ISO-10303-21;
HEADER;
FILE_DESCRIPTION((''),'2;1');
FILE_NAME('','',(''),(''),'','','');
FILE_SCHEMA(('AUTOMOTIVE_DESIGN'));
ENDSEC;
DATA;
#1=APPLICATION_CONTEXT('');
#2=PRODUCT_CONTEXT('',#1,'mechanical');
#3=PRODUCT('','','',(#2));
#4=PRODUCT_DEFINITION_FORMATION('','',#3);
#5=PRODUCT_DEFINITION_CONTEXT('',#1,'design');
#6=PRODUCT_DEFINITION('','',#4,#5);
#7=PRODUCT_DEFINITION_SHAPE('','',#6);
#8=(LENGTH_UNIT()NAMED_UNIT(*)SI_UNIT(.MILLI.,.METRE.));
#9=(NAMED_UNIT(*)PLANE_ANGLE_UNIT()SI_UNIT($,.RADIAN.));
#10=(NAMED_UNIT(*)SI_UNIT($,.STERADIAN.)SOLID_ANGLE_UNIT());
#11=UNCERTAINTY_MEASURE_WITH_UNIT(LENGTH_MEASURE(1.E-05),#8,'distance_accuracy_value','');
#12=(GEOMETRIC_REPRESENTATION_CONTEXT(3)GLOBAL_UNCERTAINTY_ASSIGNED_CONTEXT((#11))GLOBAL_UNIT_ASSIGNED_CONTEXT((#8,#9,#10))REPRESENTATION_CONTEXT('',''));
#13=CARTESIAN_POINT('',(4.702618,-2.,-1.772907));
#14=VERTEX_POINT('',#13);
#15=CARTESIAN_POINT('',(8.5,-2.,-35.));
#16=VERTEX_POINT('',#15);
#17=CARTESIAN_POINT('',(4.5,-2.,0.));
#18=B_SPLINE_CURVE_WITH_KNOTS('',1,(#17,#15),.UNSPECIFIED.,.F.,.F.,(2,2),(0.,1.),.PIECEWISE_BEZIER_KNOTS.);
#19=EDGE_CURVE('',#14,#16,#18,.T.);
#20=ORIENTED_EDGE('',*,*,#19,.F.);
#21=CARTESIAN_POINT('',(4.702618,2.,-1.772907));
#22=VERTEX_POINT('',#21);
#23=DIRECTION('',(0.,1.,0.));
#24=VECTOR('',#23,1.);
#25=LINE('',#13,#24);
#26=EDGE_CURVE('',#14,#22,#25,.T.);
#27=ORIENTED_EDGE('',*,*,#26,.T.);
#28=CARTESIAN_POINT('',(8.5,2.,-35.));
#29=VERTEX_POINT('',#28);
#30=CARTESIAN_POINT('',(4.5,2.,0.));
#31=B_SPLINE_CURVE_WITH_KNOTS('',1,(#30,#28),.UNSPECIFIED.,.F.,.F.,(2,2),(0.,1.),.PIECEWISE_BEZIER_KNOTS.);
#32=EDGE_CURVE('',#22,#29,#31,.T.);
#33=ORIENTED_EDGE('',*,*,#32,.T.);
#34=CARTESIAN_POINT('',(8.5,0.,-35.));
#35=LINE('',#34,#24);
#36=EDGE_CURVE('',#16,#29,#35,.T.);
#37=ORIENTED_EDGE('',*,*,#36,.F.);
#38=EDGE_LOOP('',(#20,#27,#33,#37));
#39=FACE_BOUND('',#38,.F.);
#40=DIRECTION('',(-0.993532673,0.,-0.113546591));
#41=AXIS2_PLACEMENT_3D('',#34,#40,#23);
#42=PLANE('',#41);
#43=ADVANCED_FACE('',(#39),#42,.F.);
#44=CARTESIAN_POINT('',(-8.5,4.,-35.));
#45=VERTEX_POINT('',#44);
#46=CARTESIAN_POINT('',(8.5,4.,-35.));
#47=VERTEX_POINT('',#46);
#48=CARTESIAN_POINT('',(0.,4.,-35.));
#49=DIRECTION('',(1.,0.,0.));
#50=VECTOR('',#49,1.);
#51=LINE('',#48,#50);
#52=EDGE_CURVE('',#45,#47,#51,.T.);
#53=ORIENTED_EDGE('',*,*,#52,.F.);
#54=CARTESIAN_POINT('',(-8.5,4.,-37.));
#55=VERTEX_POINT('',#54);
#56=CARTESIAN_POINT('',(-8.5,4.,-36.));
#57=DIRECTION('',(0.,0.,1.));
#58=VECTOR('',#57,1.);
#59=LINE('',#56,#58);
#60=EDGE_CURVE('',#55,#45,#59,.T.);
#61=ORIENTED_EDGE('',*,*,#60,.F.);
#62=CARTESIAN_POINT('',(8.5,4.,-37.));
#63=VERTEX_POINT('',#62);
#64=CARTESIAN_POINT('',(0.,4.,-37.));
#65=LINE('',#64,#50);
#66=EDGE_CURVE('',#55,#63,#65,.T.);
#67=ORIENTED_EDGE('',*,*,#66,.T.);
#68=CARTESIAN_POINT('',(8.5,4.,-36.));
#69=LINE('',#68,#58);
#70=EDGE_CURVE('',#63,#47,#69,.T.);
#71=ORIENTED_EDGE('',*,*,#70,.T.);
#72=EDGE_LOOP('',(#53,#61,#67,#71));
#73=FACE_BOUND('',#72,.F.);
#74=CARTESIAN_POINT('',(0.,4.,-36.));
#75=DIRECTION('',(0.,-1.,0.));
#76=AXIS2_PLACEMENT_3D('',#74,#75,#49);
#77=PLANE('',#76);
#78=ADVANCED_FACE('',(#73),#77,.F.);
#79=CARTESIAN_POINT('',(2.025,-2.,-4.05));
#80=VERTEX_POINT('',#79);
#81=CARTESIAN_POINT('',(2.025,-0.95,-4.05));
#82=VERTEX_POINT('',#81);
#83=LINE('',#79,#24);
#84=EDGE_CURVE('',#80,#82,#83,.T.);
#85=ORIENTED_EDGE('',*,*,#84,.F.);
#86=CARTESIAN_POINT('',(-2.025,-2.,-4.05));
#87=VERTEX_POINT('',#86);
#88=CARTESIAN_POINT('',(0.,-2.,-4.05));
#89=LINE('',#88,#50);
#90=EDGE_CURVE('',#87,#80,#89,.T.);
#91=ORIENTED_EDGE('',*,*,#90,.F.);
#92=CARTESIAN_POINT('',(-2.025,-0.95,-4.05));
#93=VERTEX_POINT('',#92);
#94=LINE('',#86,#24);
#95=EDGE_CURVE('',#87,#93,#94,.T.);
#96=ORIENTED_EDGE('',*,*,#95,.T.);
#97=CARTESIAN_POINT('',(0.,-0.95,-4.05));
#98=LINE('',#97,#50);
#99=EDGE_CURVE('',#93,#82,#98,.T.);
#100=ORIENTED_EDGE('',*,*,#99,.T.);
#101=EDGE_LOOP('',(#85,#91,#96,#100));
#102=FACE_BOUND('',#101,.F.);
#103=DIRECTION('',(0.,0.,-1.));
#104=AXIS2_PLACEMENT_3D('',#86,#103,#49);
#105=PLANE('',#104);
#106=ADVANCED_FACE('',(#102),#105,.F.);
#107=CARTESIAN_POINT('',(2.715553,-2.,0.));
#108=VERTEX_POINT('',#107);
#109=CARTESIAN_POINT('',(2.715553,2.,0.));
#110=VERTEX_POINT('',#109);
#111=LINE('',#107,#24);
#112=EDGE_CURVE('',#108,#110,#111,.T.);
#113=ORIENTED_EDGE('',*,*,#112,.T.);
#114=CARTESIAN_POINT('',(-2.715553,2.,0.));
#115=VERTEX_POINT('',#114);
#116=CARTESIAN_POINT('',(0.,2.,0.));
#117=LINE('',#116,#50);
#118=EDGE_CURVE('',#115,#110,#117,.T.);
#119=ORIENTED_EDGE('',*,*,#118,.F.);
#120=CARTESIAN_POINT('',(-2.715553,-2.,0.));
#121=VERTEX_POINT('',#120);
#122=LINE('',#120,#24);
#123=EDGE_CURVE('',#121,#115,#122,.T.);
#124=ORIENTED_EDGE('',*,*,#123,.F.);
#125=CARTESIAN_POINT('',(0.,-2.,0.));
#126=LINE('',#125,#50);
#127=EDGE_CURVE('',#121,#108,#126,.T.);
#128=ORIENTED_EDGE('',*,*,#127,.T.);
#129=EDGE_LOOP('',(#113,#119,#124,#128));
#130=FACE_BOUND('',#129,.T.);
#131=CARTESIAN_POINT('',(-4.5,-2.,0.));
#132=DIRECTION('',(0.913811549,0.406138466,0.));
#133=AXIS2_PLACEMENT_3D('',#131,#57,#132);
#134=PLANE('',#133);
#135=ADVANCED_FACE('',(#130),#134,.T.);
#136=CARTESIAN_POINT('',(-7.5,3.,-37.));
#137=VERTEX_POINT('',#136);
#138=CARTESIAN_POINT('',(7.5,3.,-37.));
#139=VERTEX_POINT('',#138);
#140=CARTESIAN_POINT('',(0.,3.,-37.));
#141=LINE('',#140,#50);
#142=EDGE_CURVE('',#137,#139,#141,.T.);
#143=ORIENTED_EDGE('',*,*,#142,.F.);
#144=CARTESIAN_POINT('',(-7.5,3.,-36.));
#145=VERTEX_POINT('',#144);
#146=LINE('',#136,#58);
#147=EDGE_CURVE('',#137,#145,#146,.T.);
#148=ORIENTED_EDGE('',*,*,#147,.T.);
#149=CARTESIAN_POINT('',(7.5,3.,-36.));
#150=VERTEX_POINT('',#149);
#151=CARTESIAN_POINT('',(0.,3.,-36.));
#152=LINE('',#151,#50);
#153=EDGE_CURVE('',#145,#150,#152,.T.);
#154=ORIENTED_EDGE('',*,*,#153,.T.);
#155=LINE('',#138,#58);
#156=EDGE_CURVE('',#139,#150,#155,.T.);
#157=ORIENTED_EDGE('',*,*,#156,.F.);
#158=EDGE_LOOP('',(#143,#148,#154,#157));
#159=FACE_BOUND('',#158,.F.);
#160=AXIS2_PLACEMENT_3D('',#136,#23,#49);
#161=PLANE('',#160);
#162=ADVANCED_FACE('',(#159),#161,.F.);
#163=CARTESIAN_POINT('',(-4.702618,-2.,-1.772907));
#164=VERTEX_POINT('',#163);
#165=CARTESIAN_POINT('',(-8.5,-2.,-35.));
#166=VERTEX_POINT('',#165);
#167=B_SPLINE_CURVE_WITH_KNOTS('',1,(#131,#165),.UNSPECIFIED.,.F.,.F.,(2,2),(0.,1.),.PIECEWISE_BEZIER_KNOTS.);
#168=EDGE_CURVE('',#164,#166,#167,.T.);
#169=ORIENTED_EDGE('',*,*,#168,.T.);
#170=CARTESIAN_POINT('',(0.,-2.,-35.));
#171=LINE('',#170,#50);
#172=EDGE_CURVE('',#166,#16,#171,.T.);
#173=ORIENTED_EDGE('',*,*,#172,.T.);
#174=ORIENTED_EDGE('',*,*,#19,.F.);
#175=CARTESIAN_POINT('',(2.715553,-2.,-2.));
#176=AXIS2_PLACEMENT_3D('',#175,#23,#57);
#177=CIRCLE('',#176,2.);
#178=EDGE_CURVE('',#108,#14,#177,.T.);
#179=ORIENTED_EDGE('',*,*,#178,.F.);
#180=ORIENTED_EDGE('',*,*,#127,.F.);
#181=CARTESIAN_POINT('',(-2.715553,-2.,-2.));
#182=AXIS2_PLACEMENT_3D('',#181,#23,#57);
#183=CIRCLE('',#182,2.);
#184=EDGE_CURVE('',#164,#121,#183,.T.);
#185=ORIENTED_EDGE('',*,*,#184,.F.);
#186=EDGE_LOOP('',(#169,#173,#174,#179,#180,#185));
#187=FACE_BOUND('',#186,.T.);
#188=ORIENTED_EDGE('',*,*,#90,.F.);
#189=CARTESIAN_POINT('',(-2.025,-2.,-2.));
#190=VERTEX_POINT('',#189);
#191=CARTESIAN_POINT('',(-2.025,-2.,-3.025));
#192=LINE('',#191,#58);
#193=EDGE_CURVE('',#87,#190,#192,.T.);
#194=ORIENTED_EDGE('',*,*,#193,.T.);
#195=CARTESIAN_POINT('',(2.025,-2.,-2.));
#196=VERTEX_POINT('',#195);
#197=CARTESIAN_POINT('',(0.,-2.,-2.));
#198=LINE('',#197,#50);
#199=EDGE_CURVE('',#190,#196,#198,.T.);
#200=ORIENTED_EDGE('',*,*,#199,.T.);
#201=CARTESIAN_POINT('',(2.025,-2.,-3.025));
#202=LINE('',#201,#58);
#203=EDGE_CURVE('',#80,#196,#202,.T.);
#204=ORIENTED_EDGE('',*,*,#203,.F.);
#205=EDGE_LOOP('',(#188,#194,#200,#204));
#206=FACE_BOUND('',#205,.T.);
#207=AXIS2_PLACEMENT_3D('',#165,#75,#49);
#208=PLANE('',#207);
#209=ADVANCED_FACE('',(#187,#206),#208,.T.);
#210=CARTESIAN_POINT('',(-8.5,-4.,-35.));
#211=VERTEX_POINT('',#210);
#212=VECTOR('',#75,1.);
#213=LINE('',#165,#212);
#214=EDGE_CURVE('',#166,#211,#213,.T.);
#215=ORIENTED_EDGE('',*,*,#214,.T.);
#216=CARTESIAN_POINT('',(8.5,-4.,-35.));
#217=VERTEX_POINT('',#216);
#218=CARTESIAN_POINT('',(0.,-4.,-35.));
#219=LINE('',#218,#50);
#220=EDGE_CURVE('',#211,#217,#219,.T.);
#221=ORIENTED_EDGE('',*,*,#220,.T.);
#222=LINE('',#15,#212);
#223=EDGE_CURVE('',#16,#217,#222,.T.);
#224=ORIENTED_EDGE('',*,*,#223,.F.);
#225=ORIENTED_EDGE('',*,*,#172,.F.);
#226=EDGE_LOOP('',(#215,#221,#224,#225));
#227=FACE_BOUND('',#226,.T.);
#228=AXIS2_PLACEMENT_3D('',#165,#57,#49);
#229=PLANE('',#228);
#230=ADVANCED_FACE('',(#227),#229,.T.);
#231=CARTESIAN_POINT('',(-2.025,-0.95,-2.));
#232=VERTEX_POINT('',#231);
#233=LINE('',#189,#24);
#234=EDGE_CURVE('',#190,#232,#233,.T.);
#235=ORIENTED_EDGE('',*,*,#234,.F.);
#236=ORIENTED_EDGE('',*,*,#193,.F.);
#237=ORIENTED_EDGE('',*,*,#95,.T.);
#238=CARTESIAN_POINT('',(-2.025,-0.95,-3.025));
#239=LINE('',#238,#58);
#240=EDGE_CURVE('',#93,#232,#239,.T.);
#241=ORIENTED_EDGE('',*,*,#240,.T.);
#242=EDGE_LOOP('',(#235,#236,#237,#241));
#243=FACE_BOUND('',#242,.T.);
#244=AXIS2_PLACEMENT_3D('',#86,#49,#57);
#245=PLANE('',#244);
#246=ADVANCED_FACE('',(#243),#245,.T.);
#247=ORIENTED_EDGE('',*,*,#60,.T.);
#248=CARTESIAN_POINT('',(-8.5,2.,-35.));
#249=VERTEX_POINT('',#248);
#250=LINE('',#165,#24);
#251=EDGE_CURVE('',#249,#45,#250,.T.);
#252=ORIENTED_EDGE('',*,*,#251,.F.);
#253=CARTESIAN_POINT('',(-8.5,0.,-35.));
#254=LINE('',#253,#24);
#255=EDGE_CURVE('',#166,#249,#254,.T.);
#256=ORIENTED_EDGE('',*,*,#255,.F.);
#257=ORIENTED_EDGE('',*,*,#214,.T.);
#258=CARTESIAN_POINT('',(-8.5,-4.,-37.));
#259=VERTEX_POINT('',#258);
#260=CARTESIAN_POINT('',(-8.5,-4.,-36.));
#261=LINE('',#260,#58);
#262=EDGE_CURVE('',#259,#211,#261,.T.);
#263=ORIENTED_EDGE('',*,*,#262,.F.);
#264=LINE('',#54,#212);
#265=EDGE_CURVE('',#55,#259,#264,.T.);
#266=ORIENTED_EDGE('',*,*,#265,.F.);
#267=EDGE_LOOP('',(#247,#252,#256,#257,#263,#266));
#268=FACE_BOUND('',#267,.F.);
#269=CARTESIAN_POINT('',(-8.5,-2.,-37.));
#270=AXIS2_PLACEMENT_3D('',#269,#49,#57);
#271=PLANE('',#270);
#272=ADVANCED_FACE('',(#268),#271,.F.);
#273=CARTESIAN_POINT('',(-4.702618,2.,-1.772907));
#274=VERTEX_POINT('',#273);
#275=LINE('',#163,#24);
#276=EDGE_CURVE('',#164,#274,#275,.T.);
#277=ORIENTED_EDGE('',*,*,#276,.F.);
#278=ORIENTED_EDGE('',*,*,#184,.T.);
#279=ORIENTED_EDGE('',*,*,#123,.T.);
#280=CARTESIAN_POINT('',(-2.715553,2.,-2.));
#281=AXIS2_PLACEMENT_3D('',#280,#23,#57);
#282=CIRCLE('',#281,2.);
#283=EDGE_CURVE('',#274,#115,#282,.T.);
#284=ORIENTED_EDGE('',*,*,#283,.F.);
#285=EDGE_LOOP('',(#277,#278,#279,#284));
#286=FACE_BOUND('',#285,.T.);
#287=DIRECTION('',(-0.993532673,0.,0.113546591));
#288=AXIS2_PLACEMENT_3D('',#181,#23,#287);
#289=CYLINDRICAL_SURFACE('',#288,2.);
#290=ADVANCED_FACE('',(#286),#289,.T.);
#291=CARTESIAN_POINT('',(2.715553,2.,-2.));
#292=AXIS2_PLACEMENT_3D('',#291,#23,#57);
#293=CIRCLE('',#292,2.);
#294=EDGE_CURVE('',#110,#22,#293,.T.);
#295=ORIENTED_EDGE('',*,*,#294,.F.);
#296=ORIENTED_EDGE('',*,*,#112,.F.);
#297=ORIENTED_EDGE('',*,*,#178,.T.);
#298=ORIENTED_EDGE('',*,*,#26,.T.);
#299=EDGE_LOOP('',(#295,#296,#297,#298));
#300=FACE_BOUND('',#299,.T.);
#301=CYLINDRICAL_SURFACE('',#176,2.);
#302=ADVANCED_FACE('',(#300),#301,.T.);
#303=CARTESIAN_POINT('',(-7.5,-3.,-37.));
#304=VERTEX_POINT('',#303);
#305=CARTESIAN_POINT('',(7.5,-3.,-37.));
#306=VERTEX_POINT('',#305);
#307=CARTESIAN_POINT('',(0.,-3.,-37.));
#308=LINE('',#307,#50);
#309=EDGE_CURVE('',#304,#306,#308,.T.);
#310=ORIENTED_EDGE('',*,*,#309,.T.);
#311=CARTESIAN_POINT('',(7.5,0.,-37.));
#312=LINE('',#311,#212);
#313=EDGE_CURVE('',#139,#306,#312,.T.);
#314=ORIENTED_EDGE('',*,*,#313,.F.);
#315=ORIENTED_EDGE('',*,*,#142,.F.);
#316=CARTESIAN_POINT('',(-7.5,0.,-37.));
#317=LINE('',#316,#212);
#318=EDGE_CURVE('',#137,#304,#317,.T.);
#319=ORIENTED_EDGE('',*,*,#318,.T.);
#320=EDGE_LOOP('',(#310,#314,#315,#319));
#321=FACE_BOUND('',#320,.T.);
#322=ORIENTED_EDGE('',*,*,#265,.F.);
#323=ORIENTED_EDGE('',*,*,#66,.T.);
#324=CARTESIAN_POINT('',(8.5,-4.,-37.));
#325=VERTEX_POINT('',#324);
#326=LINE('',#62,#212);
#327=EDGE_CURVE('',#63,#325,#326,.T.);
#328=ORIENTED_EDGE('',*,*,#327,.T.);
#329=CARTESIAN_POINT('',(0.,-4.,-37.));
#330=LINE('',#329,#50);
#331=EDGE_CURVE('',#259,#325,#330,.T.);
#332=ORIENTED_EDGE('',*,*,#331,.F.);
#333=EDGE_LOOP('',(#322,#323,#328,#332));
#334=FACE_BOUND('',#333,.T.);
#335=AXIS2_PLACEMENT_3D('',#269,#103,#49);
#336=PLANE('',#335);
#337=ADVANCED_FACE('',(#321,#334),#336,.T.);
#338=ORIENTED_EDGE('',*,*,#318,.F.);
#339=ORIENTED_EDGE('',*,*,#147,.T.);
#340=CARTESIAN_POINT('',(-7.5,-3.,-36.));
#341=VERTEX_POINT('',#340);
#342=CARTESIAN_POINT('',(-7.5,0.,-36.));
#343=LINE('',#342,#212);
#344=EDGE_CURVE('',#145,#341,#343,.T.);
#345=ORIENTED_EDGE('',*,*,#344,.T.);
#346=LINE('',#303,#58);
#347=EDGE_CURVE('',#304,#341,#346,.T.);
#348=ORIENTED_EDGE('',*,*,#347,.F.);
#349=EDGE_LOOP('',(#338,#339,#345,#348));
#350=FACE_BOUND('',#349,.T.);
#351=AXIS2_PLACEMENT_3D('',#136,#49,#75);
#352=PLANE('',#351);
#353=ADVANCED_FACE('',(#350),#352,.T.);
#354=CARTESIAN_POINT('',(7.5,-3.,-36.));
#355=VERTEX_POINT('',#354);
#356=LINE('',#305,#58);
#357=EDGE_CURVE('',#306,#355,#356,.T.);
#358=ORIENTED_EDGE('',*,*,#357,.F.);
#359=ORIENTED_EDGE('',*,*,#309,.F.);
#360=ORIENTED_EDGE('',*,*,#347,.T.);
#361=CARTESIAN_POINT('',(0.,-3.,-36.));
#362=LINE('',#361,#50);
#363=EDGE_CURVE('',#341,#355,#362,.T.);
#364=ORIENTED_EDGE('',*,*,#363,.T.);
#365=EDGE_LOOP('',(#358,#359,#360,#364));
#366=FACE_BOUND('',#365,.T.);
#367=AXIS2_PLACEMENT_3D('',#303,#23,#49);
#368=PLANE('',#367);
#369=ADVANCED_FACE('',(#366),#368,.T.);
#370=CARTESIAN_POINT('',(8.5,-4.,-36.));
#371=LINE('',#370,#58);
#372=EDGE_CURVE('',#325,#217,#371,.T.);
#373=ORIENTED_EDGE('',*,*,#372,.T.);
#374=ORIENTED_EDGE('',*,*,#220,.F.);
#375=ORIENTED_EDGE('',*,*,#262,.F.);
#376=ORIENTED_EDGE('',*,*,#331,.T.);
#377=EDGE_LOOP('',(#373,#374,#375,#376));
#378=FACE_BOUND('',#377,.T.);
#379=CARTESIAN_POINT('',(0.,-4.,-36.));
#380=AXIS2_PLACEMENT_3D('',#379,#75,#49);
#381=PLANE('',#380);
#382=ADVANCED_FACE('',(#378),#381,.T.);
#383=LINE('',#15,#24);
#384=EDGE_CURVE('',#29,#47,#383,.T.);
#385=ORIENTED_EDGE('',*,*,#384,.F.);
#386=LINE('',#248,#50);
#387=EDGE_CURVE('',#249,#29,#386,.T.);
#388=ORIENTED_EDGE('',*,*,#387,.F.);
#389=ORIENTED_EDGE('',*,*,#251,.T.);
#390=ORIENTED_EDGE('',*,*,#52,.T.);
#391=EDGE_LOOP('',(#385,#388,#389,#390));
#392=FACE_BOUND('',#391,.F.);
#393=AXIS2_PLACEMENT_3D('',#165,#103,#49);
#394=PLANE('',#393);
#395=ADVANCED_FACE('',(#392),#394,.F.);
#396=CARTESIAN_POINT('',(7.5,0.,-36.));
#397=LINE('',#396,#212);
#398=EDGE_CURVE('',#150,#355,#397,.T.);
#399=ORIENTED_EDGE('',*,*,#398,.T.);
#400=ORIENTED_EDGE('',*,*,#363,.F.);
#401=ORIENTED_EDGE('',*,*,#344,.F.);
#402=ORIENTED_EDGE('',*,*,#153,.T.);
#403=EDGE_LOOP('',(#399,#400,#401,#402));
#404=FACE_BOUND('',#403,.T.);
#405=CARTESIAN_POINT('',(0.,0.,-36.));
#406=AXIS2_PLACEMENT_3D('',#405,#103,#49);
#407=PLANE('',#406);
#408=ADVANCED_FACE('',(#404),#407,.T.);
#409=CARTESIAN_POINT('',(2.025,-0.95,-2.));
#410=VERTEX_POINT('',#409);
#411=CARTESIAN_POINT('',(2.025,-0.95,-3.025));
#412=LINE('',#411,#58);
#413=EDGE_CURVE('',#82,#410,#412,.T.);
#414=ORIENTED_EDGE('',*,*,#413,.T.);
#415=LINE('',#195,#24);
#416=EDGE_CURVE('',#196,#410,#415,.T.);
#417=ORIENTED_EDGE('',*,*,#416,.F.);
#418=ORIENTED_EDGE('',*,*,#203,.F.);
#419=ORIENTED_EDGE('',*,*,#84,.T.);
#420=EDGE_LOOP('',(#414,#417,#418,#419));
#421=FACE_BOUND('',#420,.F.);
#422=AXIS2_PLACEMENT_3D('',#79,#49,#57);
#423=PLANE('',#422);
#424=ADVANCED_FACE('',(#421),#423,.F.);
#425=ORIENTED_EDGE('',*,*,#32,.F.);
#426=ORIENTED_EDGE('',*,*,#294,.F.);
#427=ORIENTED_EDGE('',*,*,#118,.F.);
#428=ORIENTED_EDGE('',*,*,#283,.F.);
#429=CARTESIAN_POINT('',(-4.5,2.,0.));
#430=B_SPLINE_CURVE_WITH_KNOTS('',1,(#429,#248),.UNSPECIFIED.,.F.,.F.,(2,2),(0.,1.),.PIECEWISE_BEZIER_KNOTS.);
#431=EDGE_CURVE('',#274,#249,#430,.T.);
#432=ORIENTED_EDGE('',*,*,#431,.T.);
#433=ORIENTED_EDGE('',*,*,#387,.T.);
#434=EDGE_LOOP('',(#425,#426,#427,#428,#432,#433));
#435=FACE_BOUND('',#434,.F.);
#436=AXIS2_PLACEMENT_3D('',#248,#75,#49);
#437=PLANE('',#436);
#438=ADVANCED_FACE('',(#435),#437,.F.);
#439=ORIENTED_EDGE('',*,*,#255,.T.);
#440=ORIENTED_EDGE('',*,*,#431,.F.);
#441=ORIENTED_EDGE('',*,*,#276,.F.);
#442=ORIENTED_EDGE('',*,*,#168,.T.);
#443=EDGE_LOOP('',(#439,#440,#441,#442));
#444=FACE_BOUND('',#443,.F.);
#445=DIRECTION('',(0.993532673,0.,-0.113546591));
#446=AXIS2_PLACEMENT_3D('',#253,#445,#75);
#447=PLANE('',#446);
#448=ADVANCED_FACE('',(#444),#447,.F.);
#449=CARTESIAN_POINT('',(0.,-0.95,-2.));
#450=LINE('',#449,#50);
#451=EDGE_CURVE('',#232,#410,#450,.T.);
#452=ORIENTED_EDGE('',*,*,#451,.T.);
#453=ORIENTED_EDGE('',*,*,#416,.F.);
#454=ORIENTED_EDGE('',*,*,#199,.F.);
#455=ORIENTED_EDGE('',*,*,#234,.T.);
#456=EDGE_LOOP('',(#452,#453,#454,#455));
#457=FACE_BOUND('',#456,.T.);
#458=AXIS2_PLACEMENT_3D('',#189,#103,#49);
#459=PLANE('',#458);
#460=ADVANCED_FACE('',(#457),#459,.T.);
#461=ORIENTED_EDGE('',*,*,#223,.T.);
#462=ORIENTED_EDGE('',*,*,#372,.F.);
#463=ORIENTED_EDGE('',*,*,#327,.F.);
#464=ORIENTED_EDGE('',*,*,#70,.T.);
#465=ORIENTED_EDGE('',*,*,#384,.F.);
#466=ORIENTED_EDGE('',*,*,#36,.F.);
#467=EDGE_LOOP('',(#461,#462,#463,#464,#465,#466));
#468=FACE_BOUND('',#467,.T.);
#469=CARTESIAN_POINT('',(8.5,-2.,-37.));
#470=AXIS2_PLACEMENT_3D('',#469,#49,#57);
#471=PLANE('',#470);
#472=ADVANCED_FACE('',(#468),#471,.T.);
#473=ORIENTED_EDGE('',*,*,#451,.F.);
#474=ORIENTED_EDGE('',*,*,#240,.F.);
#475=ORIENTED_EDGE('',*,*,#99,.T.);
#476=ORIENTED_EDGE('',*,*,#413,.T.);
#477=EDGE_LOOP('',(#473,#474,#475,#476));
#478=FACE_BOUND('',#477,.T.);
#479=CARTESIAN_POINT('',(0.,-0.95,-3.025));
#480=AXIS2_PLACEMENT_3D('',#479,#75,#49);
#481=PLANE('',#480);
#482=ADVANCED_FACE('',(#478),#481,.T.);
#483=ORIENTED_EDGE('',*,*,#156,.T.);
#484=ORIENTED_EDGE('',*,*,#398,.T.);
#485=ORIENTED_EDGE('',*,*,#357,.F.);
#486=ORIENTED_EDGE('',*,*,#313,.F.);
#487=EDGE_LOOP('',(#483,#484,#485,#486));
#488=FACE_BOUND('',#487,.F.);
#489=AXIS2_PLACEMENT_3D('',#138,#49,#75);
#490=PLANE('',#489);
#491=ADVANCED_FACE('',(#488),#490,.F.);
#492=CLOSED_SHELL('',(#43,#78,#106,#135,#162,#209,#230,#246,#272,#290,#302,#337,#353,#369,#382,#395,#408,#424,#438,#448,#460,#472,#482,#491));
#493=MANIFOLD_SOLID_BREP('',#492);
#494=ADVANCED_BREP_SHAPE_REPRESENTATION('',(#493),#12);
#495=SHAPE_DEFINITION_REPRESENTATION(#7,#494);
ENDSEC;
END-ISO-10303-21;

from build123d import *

# Parameters (mm, degrees)
F0_W          = 9
F0_H          = 4
F2_W          = 17
F2_H          = 4
F4_DEPTH      = 2
F5_W          = 17
F5_H          = 2
F6_DEPTH      = 2
F6_DEPTH_BACK = 6
F7_W          = 4.05
F7_H          = 2.05
F8_DEPTH      = 1.05
F9_W          = 14.9999996647
F9_H          = 5.9999996647
F10_DEPTH     = 1
F11_R         = 2


with BuildPart() as f3:
    # F0 (on Top) → F3 section 0
    with BuildSketch(Plane.XY):
        Rectangle(F0_W, F0_H)
    # F2 (on offset) → F3 section 1
    with BuildSketch(Plane.XY.offset(-35)):
        Rectangle(F2_W, F2_H)
    loft()

    # F4 (add): a face of the model
    f4_faces = [f3.faces().sort_by_distance(p)[0] for p in [
        (0, 0, -35),
    ]]
    extrude(f4_faces, amount=F4_DEPTH)

    # F5 (on face) → F6 (join, two sides)
    with BuildSketch(Plane.XZ.offset(2)) as f6_sk:
        with Locations((0, -36)):
            Rectangle(F5_W, F5_H)
    extrude(amount=F6_DEPTH)
    extrude(f6_sk.sketch, amount=-F6_DEPTH_BACK)

    # F7 (on face) → F8 (cut)
    with BuildSketch(Plane.XZ.offset(2)):
        with Locations((0, -3.025)):
            Rectangle(F7_W, F7_H)
    extrude(amount=-F8_DEPTH, mode=Mode.SUBTRACT)

    # F9 (on face) → F10 (cut)
    with BuildSketch(Plane(origin=(0, 0, -37), x_dir=(1, 0, 0), z_dir=(0, 0, -1))):
        Rectangle(F9_W, F9_H)
    extrude(amount=-F10_DEPTH, mode=Mode.SUBTRACT)

    # F11
    f11_edges = [f3.edges().sort_by_distance(p)[0] for p in [
        (-4.5, 0, 0),
        (4.5, 0, 0),
    ]]
    fillet(f11_edges, radius=F11_R)


solid = f3.part
